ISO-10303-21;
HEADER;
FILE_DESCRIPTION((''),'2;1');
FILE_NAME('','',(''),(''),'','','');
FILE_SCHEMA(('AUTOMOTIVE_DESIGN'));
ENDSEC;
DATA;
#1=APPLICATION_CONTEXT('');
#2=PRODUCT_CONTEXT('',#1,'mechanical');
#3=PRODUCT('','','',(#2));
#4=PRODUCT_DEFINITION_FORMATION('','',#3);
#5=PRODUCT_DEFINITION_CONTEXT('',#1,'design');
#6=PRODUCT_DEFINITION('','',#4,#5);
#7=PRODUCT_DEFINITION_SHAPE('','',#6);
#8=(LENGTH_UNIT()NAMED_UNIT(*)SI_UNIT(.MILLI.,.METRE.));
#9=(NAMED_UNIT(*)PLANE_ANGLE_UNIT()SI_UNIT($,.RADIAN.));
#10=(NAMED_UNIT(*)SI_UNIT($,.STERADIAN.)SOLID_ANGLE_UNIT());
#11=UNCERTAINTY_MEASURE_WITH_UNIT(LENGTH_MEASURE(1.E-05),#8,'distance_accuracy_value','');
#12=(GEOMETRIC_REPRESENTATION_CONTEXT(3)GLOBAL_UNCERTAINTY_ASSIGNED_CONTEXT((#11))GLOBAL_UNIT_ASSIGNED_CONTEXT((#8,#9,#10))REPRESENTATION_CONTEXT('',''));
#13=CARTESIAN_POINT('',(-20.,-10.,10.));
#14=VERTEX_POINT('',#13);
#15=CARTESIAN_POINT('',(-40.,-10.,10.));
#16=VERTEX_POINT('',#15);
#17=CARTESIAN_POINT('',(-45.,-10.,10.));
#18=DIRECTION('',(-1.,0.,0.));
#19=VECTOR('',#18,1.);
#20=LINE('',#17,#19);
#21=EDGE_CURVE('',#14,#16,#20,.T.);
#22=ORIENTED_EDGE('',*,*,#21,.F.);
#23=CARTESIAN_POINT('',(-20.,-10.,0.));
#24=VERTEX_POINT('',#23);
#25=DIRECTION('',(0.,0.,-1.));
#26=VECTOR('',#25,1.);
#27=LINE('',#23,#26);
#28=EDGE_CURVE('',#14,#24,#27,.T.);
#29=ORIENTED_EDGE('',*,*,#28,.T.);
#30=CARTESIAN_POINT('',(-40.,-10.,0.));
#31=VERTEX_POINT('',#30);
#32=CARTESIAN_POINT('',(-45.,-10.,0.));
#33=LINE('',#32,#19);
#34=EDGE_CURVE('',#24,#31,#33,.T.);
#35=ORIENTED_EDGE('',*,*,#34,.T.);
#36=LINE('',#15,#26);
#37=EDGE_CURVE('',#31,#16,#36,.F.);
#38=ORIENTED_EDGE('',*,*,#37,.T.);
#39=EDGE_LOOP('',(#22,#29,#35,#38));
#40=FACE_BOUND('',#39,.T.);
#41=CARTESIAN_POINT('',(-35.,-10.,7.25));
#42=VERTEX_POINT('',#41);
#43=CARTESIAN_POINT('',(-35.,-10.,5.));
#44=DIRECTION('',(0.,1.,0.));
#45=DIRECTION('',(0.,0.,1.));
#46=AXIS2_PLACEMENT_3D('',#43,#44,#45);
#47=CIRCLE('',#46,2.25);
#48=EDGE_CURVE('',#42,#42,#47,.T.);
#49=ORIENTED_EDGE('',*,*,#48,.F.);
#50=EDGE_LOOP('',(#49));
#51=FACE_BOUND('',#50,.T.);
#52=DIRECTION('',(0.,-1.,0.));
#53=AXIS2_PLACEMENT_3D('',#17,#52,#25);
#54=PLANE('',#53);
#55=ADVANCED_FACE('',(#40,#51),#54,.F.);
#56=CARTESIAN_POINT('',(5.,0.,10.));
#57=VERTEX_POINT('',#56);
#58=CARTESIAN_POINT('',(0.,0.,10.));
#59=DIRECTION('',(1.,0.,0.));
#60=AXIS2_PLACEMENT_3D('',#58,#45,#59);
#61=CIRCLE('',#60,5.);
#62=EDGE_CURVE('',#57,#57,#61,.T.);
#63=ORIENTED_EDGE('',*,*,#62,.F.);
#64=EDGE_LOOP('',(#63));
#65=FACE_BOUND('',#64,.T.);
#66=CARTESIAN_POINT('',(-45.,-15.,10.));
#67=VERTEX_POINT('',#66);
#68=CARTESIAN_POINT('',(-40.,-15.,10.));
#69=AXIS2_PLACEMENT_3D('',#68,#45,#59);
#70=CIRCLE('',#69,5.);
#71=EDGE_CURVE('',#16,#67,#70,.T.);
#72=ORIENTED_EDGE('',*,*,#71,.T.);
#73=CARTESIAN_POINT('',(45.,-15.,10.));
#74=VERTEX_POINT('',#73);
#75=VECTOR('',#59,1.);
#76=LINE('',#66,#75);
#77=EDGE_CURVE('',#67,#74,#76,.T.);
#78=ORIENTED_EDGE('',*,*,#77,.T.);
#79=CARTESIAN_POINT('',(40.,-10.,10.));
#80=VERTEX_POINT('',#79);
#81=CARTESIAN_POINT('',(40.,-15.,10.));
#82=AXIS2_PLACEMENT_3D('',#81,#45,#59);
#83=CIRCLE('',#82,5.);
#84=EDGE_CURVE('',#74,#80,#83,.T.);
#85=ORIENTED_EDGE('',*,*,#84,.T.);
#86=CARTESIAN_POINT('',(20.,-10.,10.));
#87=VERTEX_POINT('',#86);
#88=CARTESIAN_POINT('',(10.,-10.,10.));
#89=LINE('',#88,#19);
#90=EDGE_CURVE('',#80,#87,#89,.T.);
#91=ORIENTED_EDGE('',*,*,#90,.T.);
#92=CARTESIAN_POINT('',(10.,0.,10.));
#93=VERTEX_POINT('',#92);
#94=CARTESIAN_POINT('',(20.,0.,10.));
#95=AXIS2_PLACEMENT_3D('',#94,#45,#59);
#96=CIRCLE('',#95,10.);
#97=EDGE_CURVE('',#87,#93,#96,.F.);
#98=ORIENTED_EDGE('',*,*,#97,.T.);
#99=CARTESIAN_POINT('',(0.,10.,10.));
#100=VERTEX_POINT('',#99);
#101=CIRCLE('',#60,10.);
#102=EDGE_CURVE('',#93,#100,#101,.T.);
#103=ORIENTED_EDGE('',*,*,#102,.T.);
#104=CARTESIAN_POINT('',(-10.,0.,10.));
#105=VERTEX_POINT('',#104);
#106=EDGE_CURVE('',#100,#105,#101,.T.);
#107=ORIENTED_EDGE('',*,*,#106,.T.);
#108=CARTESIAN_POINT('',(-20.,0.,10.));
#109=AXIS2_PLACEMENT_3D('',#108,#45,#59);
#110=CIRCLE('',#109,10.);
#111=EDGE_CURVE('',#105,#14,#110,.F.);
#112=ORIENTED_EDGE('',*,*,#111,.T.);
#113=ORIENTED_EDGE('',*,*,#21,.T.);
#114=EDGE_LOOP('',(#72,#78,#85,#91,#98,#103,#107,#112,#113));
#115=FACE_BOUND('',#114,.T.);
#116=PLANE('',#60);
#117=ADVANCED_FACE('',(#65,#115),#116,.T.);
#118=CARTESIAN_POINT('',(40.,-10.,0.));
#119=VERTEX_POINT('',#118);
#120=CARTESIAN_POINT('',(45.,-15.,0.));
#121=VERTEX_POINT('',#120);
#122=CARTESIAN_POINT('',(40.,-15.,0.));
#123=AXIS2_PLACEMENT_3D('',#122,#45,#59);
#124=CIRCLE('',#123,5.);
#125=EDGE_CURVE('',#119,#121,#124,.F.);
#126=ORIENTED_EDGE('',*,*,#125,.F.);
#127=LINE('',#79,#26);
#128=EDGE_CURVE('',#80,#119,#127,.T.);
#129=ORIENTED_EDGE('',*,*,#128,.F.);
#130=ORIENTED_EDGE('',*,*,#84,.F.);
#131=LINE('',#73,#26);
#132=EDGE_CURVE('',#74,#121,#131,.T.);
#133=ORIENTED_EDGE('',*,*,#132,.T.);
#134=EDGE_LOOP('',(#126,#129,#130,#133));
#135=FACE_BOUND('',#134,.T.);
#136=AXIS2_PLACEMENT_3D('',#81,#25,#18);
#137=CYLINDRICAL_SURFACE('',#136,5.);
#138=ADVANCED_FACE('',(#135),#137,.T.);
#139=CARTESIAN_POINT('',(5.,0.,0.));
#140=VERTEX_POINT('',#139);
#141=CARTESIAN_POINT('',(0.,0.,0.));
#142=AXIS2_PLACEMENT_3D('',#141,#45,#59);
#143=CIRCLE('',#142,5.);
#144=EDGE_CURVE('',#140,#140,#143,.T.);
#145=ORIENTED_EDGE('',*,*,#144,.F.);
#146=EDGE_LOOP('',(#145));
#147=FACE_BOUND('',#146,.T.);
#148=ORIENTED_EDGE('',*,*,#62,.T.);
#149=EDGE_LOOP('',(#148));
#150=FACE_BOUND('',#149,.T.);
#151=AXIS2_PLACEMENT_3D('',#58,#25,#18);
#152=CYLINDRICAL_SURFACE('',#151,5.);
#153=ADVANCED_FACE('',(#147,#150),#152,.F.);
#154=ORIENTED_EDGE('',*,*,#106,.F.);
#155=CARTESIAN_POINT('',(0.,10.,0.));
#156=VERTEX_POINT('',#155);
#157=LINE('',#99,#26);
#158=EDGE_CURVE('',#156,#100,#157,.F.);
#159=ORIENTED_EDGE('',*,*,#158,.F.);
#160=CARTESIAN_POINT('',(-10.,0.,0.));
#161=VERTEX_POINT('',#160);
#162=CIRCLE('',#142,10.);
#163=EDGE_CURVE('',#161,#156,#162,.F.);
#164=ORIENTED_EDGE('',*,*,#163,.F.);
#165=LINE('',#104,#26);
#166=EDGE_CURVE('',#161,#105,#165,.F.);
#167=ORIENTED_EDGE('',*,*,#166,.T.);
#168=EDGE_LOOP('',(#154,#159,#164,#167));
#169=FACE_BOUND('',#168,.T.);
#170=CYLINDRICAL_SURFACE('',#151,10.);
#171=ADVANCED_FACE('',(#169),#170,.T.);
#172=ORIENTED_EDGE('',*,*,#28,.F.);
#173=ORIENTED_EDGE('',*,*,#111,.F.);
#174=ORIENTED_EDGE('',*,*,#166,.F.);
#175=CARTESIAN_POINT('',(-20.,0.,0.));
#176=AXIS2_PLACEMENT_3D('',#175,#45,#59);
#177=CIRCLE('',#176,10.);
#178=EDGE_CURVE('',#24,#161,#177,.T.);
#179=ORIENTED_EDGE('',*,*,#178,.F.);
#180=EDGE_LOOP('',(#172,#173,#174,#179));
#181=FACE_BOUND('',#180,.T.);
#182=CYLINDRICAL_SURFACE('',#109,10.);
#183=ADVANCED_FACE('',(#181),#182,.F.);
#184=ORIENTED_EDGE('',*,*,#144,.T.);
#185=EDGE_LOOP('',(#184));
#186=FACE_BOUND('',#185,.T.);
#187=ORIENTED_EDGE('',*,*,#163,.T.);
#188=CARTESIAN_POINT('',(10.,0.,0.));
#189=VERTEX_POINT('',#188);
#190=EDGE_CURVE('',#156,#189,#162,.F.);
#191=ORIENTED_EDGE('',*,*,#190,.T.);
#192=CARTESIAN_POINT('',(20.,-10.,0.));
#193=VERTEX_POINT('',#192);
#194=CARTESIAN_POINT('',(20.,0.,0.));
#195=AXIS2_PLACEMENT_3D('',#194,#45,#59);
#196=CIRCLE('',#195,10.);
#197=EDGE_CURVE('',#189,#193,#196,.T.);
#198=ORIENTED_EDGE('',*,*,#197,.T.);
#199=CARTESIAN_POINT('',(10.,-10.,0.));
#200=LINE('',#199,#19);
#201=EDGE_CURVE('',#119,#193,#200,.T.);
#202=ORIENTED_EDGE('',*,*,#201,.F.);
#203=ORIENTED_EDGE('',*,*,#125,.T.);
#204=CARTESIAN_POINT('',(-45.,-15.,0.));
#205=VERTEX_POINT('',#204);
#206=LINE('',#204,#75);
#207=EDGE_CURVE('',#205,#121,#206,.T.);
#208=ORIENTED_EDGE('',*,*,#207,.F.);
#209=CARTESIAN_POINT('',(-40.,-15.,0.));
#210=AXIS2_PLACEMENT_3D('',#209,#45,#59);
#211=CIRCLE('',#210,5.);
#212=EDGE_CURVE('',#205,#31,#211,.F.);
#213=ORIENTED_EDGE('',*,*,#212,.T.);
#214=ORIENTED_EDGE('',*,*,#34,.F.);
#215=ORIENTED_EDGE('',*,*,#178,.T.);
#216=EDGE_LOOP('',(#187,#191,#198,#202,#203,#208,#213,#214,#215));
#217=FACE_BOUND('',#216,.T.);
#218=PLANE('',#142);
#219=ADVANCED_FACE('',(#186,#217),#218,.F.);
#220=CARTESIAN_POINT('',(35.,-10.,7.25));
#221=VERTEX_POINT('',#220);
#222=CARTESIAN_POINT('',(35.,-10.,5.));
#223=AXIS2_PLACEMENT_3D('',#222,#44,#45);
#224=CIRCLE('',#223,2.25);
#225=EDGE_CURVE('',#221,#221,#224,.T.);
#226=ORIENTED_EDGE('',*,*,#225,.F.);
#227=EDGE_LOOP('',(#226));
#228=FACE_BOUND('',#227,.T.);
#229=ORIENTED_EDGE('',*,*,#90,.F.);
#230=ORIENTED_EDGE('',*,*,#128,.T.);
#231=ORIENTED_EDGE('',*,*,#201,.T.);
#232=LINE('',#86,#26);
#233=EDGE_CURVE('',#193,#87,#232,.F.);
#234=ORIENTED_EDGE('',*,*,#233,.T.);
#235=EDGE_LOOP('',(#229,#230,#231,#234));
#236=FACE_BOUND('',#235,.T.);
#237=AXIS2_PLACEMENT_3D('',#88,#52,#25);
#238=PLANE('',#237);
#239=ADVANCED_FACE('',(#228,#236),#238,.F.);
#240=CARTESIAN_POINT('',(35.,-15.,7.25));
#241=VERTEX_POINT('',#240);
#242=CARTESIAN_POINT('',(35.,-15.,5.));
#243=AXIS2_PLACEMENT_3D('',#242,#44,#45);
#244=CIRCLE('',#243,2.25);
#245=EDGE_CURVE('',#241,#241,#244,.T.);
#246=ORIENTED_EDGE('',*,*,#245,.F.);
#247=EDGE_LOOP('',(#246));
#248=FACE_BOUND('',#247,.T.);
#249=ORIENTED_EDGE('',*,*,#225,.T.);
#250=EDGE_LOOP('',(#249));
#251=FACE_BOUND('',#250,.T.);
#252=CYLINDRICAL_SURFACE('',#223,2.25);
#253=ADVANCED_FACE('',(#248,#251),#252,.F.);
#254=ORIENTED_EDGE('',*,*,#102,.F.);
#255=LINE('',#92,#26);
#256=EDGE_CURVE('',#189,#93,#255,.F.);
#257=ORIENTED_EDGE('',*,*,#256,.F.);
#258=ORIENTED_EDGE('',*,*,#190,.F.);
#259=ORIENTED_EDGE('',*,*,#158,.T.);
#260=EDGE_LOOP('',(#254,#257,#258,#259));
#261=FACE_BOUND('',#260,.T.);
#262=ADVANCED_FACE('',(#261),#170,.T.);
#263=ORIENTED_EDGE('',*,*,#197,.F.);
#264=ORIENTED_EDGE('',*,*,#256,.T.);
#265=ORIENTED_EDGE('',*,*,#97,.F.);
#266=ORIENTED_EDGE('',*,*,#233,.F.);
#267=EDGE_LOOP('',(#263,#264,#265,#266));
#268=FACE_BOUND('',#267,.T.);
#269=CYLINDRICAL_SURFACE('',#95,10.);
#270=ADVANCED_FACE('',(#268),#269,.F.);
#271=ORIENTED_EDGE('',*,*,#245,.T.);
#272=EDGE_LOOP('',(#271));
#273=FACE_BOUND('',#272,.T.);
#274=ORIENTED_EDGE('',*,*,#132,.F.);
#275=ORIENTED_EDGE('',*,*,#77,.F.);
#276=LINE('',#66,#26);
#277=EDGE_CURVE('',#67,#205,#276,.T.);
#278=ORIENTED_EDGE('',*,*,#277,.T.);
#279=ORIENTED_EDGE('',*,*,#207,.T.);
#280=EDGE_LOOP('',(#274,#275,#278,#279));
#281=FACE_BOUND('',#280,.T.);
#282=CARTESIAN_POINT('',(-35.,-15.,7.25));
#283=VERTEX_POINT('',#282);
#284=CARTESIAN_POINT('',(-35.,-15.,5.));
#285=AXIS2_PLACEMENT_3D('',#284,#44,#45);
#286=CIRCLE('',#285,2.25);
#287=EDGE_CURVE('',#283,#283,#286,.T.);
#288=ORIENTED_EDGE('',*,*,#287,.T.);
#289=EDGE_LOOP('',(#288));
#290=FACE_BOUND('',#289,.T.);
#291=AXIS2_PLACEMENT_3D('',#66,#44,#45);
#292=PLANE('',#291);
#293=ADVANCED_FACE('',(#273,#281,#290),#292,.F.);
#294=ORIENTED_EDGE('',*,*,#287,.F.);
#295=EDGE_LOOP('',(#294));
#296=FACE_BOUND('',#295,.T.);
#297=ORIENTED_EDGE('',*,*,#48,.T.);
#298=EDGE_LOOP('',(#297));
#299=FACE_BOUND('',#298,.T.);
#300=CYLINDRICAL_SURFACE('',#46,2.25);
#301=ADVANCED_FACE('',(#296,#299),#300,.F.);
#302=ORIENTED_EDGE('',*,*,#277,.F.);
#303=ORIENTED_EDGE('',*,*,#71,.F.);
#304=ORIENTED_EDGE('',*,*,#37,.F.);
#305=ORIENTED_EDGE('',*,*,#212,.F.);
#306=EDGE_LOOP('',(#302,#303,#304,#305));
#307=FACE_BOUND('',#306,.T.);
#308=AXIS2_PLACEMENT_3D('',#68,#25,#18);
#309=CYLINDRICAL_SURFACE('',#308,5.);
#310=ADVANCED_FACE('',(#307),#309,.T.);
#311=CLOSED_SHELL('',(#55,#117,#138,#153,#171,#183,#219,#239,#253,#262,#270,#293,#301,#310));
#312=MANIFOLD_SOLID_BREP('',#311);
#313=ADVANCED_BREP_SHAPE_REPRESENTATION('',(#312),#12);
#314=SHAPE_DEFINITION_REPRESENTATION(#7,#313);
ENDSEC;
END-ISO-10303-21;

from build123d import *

# Parameters (mm, degrees)
SKETCH1_R            = 5
BOSS_EXTRUDE1_DEPTH  = 10
FILLET1_DEPTH        = 10
FILLET1_2_DEPTH      = 10
M4_CLEARANCE_HOLE1_D = 4.5
FILLET2_R            = 5


with BuildPart() as part:
    # Sketch1 → Boss-Extrude1 (new body)
    with BuildSketch(Plane.XY):
        Polygon((10, -10), (45, -10), (45, -15), (-45, -15), (-45, -10), (-10, -10), (-10, 10), (10, 10), align=None)
        Circle(SKETCH1_R, mode=Mode.SUBTRACT)
    extrude(amount=BOSS_EXTRUDE1_DEPTH)

    # Fillet1: read off the stored shape, not the designer's step
    # Fillet1 outline → Fillet1 (cut)
    with BuildSketch(Plane.XY):
        with BuildLine():
            Line((10, 10), (0, 10))
            ThreePointArc((0, 10), (7.071067812, 7.071067812), (10, 0))
            Line((10, 0), (10, 10))
        make_face()
        with BuildLine():
            Line((-10, 10), (-10, 0))
            ThreePointArc((-10, 0), (-7.071067812, 7.071067812), (0, 10))
            Line((0, 10), (-10, 10))
        make_face()
    extrude(amount=FILLET1_DEPTH, mode=Mode.SUBTRACT)

    # Fillet1 2 outline → Fillet1 2 (add)
    with BuildSketch(Plane.XY):
        with BuildLine():
            ThreePointArc((20, -10), (12.928932188, -7.071067812), (10, 0))
            Line((10, 0), (10, -10))
            Line((10, -10), (20, -10))
        make_face()
        with BuildLine():
            ThreePointArc((-10, 0), (-12.928932188, -7.071067812), (-20, -10))
            Line((-20, -10), (-10, -10))
            Line((-10, -10), (-10, 0))
        make_face()
    extrude(amount=FILLET1_2_DEPTH)

    # M4 Clearance Hole1 (through all)
    with Locations(Plane(origin=(0, -10, 0), x_dir=(1, 0, 0), z_dir=(0, 1, 0))):
        with Locations((-35, -5), (35, -5)):
            Hole(M4_CLEARANCE_HOLE1_D / 2)

    # Fillet2
    fillet2_edges = [part.edges().sort_by_distance(p)[0] for p in [
        (45, -10, 5),
        (-45, -10, 5),
    ]]
    fillet(fillet2_edges, radius=FILLET2_R - 0.0001)  # a hair under: the kernel refuses the full size


solid = part.part
